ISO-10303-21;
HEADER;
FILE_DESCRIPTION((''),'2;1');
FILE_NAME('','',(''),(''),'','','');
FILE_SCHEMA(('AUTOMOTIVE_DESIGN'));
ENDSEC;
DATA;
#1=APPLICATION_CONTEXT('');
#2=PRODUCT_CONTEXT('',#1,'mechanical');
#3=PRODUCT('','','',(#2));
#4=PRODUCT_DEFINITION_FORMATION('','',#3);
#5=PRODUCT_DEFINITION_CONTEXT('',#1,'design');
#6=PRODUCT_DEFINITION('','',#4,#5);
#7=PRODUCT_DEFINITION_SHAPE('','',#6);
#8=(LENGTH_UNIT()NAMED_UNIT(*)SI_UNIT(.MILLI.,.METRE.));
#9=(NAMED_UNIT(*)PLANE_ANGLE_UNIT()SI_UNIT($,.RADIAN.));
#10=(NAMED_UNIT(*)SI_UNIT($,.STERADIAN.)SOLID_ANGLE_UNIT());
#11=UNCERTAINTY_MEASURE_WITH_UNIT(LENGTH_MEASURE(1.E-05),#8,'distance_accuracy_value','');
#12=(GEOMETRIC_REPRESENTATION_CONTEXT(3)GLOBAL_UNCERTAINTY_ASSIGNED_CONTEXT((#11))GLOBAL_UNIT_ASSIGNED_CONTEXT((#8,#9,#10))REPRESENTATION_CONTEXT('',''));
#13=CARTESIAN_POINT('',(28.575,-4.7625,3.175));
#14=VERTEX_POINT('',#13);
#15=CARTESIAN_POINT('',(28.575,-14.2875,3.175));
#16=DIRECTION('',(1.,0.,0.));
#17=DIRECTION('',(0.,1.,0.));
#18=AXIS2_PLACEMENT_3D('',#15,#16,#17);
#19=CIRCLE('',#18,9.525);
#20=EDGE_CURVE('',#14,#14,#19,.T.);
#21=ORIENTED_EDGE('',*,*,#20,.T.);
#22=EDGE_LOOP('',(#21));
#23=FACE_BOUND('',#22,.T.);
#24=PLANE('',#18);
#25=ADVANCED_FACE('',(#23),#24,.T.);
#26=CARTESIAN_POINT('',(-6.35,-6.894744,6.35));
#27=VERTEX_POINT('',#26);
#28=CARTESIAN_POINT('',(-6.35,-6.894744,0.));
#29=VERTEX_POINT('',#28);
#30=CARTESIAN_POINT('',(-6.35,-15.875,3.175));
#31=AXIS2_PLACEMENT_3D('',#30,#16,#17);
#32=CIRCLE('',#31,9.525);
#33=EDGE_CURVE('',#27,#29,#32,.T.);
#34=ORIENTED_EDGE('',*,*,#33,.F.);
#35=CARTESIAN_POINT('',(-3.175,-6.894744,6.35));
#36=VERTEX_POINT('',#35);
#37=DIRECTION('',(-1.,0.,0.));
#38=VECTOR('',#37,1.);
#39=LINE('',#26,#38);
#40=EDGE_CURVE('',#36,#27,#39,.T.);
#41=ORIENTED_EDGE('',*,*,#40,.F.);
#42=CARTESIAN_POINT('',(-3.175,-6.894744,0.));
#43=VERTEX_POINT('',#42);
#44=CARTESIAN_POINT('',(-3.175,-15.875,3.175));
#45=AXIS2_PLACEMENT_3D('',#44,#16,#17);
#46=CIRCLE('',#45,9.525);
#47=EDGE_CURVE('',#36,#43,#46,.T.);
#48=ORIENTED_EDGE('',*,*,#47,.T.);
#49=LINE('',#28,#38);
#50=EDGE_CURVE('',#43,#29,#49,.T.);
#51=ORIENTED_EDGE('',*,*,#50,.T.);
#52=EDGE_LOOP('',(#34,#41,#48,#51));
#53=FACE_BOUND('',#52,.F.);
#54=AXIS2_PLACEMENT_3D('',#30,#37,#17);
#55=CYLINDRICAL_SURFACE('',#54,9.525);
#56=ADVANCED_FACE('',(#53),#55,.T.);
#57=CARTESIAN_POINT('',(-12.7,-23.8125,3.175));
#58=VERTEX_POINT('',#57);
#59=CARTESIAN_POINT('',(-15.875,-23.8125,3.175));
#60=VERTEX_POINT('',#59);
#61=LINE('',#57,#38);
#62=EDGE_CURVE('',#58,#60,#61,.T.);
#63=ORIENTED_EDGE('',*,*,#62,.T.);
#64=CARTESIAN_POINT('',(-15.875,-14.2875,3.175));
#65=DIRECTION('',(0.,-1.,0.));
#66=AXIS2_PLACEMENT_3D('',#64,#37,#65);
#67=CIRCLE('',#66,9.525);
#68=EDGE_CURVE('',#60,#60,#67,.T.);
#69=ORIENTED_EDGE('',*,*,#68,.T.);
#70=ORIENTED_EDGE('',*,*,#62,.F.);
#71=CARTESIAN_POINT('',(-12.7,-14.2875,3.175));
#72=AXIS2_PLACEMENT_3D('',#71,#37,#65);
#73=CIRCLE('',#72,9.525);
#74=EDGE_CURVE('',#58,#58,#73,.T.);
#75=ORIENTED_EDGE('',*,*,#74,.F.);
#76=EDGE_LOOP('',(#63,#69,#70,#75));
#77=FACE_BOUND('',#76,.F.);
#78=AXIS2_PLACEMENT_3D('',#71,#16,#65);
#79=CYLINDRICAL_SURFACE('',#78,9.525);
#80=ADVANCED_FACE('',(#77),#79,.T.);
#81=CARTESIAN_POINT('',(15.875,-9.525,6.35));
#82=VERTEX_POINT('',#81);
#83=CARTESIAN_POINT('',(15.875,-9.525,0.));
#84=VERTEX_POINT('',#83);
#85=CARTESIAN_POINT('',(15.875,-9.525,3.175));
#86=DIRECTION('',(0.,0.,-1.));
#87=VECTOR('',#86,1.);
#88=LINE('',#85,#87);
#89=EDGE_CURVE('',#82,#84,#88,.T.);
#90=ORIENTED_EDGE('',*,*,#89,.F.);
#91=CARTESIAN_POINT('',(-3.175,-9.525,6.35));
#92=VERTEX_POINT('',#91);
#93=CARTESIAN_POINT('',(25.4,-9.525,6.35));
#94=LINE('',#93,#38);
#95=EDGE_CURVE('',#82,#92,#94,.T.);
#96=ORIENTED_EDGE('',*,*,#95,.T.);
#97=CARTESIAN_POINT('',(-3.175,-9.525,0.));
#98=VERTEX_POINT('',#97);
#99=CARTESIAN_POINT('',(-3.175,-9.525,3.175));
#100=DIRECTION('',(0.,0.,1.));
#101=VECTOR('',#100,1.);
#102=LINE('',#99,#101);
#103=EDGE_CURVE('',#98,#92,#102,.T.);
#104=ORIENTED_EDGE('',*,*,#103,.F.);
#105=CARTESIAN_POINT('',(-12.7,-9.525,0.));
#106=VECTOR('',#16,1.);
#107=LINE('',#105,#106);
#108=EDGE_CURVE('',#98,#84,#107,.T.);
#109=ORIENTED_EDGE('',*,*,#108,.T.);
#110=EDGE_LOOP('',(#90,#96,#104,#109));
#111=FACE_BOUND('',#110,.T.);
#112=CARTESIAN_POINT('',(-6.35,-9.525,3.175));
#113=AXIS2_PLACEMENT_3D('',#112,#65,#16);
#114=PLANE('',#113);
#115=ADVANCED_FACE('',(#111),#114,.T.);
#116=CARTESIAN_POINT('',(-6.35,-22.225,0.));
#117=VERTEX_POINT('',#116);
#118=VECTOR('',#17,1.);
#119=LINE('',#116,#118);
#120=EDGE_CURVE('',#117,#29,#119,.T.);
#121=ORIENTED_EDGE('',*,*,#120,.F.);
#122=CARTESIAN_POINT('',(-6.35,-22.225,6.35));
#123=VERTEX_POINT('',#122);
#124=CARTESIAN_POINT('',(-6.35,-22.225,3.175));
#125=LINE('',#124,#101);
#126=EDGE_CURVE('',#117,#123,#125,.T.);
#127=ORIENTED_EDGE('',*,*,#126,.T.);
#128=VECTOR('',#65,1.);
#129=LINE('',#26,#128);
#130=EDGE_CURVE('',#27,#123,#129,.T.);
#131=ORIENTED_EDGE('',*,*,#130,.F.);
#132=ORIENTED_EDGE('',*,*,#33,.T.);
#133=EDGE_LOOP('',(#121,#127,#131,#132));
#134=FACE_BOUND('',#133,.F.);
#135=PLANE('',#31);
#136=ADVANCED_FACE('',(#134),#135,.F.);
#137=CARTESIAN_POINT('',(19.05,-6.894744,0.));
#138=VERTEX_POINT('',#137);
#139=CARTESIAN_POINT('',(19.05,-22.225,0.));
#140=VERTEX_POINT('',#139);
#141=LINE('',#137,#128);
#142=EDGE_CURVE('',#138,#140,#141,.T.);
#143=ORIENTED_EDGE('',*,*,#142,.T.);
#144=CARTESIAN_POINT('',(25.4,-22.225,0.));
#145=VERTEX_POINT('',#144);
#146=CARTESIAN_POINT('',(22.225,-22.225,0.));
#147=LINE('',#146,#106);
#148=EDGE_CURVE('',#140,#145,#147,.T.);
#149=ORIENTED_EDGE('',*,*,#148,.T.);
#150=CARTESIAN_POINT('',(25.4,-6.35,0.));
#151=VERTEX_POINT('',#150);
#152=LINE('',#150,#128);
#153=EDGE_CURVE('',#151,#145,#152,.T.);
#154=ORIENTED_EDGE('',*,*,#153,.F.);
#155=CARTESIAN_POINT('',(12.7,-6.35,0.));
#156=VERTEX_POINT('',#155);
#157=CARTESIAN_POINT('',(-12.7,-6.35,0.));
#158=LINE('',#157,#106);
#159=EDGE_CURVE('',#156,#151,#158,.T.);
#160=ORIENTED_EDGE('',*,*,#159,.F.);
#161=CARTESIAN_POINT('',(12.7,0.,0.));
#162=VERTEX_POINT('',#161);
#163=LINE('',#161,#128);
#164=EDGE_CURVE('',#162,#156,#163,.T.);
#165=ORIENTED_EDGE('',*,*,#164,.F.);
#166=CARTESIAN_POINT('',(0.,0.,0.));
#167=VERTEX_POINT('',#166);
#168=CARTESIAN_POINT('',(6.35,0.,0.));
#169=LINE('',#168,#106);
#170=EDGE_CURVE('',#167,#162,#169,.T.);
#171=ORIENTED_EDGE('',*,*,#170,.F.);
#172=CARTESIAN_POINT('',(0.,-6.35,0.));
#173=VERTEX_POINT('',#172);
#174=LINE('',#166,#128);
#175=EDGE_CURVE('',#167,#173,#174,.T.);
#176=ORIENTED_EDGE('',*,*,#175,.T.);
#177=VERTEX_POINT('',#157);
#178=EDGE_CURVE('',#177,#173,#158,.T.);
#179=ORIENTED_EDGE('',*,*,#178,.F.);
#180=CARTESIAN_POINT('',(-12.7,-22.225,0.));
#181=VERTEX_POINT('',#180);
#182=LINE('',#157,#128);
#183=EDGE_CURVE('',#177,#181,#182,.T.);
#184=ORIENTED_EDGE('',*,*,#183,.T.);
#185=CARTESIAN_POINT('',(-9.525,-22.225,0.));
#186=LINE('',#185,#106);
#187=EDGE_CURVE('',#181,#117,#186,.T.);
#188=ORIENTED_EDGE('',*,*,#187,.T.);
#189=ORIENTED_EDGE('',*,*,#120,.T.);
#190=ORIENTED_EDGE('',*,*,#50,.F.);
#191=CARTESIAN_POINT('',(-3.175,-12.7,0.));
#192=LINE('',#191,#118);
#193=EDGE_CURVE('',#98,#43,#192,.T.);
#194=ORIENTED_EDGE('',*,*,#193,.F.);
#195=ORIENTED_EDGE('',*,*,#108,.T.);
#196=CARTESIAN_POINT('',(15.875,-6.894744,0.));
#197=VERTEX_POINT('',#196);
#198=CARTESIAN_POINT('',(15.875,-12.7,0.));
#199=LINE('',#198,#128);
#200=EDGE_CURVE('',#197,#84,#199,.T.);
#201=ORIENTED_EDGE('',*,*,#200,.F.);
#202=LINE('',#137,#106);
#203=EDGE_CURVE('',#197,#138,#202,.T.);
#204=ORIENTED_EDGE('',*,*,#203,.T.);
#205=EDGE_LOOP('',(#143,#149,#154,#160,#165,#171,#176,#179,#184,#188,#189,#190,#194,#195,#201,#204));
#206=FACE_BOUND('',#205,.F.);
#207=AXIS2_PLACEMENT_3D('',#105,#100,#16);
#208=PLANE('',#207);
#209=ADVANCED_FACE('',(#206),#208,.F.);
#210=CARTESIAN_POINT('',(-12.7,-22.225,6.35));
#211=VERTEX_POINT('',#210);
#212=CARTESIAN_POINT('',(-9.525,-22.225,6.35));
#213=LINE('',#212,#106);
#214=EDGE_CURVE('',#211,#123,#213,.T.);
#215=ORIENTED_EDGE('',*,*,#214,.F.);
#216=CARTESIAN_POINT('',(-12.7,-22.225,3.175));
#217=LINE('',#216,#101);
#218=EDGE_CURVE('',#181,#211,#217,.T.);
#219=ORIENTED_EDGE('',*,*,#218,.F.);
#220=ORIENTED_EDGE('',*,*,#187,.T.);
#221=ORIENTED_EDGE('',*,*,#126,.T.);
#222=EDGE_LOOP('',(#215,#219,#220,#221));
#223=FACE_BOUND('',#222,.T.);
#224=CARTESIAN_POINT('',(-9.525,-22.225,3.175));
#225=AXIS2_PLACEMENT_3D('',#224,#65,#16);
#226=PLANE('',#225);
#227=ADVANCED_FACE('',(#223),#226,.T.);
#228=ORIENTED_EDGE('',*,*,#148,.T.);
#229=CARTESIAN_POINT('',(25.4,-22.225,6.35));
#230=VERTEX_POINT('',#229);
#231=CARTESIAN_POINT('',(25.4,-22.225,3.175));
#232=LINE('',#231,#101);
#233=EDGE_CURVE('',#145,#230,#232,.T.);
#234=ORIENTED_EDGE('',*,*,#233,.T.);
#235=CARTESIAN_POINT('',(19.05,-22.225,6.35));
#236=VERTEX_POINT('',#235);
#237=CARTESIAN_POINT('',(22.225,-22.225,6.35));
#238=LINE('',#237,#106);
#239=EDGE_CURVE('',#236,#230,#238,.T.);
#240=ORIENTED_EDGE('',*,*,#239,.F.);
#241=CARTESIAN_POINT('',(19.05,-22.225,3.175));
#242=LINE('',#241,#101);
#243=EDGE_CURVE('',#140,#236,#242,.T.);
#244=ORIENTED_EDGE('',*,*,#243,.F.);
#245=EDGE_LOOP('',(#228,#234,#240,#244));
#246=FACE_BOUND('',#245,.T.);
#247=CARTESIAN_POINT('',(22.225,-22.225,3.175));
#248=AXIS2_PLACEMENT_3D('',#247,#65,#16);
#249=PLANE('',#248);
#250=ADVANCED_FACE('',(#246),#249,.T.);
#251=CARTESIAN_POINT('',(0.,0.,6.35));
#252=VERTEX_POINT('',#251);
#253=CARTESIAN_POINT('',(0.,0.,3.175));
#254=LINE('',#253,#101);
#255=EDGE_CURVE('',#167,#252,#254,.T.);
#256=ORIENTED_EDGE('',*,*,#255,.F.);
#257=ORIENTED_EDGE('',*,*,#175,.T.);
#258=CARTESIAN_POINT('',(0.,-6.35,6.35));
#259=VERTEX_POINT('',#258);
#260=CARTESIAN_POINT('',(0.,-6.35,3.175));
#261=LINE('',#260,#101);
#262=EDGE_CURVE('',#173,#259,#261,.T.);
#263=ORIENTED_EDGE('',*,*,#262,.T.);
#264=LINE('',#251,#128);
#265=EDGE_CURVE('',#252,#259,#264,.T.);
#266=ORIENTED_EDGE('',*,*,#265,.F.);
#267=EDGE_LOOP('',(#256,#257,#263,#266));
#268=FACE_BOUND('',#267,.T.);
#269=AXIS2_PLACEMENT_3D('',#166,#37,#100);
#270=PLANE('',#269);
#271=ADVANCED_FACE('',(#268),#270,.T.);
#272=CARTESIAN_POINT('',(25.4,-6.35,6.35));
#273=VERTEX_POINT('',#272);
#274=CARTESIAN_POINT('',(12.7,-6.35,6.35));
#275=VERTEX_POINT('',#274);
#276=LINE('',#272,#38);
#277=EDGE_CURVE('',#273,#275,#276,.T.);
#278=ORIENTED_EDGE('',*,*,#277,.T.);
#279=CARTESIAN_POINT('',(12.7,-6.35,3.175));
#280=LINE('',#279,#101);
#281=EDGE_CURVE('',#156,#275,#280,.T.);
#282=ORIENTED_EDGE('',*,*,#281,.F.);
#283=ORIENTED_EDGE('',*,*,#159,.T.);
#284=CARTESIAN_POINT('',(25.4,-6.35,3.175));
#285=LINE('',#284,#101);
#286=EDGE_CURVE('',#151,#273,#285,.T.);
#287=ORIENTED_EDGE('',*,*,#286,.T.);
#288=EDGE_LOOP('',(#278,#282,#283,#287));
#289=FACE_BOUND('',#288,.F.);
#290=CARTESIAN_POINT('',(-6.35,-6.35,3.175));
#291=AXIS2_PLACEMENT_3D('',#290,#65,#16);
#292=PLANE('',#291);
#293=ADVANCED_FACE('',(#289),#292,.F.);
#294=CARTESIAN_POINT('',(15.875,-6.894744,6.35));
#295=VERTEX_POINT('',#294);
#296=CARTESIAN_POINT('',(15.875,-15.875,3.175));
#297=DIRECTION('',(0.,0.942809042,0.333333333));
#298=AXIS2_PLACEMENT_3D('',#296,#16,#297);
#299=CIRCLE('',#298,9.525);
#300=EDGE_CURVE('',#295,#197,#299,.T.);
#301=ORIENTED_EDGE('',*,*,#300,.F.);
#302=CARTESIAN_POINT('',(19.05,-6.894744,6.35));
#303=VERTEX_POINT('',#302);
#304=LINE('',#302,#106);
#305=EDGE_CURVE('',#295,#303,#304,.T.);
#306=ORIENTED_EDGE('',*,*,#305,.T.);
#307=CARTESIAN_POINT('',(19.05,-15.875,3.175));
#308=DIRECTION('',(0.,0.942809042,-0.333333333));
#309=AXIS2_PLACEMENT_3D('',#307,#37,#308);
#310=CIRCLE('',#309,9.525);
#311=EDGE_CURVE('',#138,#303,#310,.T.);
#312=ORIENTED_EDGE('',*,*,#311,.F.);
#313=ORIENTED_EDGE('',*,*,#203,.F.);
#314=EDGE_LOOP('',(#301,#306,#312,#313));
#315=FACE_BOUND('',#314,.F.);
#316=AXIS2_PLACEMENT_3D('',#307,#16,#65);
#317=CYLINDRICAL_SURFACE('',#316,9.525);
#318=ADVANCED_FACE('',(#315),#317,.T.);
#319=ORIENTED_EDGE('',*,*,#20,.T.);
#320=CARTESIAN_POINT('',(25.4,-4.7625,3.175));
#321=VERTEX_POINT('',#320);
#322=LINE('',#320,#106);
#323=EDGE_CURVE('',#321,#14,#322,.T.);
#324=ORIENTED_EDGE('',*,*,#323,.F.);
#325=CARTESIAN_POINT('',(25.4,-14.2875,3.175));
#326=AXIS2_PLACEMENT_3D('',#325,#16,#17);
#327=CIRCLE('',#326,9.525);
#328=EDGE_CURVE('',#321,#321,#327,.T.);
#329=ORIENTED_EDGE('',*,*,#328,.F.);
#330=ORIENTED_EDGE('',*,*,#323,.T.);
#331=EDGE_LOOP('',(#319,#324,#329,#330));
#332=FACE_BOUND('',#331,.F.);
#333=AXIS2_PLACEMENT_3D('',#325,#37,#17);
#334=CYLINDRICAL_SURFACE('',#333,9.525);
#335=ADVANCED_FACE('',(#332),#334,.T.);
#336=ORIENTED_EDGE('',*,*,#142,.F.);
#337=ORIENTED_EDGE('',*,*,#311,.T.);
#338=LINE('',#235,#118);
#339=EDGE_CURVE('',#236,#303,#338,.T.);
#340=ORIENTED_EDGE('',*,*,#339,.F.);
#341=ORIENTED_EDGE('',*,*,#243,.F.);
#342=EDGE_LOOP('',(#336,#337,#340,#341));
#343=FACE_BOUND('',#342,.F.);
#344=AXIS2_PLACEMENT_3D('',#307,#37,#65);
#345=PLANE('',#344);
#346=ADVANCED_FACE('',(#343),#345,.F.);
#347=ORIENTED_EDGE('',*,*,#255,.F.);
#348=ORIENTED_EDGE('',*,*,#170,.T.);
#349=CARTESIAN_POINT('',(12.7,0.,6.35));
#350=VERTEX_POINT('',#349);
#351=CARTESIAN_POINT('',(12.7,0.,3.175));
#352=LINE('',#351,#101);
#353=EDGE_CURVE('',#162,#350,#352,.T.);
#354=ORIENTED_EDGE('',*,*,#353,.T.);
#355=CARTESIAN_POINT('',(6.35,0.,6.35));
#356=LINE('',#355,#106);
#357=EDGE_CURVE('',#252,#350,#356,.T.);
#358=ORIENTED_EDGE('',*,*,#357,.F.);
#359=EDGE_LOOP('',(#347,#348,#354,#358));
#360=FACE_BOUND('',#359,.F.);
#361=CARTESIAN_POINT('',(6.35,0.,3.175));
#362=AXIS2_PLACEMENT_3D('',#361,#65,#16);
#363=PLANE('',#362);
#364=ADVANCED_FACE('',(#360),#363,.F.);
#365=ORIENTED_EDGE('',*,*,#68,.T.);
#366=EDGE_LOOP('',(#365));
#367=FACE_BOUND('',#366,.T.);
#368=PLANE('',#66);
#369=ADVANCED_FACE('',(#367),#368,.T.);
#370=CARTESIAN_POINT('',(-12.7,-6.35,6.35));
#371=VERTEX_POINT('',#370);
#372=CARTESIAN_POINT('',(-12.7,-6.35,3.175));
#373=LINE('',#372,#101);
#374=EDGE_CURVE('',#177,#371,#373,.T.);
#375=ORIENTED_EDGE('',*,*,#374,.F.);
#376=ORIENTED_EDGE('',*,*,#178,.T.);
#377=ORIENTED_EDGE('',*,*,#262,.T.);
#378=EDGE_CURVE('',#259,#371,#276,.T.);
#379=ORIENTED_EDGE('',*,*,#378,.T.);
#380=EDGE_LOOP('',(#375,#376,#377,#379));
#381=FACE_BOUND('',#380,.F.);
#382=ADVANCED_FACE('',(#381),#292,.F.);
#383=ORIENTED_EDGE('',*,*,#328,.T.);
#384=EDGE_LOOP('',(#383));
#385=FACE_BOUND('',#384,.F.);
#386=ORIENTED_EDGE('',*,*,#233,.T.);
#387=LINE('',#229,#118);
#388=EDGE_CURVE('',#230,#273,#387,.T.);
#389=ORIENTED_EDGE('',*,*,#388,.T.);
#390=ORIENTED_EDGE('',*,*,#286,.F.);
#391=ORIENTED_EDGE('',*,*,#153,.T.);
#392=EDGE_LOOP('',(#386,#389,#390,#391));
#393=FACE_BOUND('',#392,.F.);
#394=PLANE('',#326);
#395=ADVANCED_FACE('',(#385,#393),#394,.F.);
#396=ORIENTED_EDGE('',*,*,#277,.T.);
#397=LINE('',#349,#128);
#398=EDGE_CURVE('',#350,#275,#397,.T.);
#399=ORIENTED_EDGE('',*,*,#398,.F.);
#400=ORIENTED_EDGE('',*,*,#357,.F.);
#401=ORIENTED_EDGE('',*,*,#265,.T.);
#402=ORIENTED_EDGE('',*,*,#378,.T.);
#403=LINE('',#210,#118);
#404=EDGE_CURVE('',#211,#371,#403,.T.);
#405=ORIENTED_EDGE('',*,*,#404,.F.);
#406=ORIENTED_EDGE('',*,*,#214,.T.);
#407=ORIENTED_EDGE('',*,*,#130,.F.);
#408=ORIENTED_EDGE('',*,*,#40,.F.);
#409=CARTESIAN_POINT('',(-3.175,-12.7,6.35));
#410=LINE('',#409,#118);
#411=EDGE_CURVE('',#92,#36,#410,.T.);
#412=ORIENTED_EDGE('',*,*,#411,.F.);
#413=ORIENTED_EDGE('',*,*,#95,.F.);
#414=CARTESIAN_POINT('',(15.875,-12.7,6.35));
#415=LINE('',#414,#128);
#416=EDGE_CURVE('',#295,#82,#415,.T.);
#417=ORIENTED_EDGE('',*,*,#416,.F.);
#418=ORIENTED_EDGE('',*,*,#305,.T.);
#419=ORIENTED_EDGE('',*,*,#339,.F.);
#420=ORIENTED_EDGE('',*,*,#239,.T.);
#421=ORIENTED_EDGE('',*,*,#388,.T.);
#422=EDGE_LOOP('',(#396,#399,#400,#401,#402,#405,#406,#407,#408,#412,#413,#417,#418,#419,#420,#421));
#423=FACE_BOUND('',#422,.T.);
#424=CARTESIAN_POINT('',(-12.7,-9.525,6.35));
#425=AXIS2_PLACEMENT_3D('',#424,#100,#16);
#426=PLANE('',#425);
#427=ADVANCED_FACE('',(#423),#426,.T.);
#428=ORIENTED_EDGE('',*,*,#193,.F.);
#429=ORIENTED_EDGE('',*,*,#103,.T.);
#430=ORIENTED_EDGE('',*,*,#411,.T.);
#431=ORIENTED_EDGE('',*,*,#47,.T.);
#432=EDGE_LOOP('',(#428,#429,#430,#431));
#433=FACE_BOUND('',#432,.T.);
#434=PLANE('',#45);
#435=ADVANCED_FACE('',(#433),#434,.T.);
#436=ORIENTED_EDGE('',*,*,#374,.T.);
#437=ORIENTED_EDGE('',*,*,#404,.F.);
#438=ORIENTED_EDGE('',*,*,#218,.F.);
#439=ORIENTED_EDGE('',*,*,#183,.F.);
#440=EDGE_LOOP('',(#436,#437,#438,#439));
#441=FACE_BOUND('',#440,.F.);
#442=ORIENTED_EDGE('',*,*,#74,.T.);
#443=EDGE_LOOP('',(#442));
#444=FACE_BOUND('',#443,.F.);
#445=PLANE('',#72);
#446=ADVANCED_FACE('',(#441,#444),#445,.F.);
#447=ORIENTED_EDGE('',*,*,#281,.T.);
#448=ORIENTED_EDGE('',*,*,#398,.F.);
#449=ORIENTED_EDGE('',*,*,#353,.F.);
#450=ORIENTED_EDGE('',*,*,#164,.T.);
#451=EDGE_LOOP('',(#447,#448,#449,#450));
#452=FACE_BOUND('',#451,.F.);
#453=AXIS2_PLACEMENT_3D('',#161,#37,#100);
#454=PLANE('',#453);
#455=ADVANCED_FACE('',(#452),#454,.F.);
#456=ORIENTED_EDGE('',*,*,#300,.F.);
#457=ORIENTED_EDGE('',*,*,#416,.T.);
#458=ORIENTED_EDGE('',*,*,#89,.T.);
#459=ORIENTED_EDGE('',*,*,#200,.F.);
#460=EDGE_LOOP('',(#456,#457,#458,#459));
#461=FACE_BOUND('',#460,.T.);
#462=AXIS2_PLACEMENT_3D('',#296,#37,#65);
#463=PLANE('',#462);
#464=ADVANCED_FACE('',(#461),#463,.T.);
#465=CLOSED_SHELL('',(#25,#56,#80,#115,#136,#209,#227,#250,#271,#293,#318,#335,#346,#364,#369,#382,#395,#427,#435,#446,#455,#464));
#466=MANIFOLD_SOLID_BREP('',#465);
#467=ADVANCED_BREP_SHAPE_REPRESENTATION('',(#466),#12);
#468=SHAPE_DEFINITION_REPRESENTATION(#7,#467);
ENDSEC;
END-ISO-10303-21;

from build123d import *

# Parameters (mm, degrees)
F0_W      = 12.7
F0_H      = 6.35
F1_DEPTH  = 6.35
F2_W      = 12.7
F2_H      = 6.35
F3_DEPTH  = 3.175
F4_W      = 6.35
F4_H      = 6.35
F5_DEPTH  = 12.7
F6_R      = 9.525
F6_W      = 15.875
F6_H      = 6.35
F7_DEPTH  = 3.175
F8_R      = 9.525
F9_DEPTH  = 3.175
F10_R     = 9.525
F11_DEPTH = 3.175
F12_R     = 9.525
F13_DEPTH = 3.175


# Not quite as in the source:
# - a feature names something its author has since deleted; it is built from what else it names


with BuildPart() as f1:
    # F0 (on Front) → F1 (new body)
    with BuildSketch(Plane.XZ):
        with Locations((6.35, 3.175)):
            Rectangle(F0_W, F0_H)
    extrude(amount=F1_DEPTH)

    # F2 (on face) → F3 (join)
    with BuildSketch(Plane.XZ.offset(6.35)):
        with Locations((-6.35, 3.175)):
            Rectangle(F2_W, F2_H)
        with Locations((6.35, 3.175)):
            Rectangle(F2_W, F2_H)
        with Locations((19.05, 3.175)):
            Rectangle(F2_W, F2_H)
    extrude(amount=F3_DEPTH)

    # F4 (on face) → F5 (join)
    with BuildSketch(Plane.XZ.offset(9.525)):
        with Locations((-9.525, 3.175)):
            Rectangle(F4_W, F4_H)
        with Locations((22.225, 3.175)):
            Rectangle(F4_W, F4_H)
    extrude(amount=F5_DEPTH)

    # F6 (on face) → F7 (join)
    with BuildSketch(Plane.YZ.offset(25.4)):
        with Locations((-14.2875, 3.175)):
            Circle(F6_R)
        with Locations((-14.2875, 3.175)):
            Rectangle(F6_W, F6_H, mode=Mode.SUBTRACT)
        with Locations((-14.2875, 3.175)):
            Rectangle(F6_W, F6_H)
    extrude(amount=F7_DEPTH)

    # F8 (on face) → F9 (join)
    with BuildSketch(Plane(origin=(-12.7, 0, 0), x_dir=(0, -1, 0), z_dir=(-1, 0, 0))):
        with Locations((14.2875, 3.175)):
            Circle(F8_R)
    extrude(amount=F9_DEPTH)

    # F10 (on face) → F11 (join)
    with BuildSketch(Plane(origin=(19.05, 0, 0), x_dir=(0, -1, 0), z_dir=(-1, 0, 0))):
        with Locations((15.875, 3.175)):
            Circle(F10_R)
    extrude(amount=F11_DEPTH)

    # F12 (on face) → F13 (join)
    with BuildSketch(Plane.YZ.offset(-6.35)):
        with Locations((-15.875, 3.175)):
            Circle(F12_R)
    extrude(amount=F13_DEPTH)


solid = f1.part
